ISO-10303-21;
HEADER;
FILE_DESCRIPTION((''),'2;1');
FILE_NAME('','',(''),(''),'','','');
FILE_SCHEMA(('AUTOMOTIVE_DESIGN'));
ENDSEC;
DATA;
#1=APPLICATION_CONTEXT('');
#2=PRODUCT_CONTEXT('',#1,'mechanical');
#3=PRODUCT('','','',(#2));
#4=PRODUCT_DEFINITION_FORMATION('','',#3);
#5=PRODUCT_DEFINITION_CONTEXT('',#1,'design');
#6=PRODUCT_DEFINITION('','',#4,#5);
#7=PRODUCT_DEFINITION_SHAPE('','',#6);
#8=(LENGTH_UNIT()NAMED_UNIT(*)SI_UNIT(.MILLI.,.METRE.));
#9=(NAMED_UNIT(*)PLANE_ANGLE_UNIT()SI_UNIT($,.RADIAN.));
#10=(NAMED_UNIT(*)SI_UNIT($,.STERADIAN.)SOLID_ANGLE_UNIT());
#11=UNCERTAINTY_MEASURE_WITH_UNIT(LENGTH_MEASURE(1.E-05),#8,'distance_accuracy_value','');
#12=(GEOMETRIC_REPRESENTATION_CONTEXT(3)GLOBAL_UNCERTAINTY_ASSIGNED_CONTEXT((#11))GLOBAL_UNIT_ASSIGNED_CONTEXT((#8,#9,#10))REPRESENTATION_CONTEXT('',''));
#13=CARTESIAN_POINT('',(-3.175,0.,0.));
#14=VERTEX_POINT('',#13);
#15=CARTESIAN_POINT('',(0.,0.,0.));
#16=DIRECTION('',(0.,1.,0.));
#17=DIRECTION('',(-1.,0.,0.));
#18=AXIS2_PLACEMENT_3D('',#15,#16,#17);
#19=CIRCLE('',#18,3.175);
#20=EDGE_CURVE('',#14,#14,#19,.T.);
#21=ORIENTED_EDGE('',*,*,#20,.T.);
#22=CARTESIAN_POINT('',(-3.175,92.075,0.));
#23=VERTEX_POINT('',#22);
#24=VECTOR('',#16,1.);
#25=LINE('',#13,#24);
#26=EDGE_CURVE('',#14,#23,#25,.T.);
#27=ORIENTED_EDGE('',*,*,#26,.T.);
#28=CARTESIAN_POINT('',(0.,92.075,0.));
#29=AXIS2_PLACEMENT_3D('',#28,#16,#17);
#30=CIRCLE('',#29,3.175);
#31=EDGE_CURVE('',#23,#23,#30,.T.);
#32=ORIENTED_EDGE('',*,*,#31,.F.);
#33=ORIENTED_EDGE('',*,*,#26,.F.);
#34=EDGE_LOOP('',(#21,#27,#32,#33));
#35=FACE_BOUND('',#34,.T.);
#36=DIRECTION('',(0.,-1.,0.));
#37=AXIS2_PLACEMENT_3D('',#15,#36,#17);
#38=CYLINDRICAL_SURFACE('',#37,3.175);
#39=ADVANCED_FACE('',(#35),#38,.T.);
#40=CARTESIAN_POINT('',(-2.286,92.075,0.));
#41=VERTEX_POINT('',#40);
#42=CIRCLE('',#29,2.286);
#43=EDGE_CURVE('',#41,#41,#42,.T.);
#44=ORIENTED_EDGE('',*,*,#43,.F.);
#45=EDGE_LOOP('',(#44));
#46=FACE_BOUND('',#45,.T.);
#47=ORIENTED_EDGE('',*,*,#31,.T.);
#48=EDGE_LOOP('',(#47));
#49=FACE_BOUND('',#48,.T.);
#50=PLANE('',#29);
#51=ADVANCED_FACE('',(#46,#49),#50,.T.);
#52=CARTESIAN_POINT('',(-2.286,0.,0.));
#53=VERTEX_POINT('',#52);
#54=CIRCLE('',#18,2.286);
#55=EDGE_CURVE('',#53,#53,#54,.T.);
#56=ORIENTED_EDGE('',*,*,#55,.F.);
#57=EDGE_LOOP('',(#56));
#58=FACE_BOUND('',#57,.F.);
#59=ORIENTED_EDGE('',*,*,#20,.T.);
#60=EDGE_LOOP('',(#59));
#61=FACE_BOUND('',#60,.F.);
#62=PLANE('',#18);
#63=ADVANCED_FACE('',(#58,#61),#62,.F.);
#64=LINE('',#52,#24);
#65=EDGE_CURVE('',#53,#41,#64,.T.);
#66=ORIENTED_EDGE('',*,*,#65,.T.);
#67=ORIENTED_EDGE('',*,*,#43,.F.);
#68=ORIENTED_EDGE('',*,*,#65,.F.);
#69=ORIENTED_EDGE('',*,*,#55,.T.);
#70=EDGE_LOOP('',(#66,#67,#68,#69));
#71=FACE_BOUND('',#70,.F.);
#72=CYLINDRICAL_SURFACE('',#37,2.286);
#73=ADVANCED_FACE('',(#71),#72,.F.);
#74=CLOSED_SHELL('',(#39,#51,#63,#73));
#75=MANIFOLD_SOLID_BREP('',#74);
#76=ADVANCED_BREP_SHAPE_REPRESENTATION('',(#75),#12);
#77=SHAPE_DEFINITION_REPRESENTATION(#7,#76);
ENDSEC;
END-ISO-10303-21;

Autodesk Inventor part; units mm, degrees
ref_plane "YZ Plane" through (0, 0, 0) normal (1, 0, 0) x (0, 1, 0)
ref_plane "XZ Plane" through (0, 0, 0) normal (0, 1, 0) x (-1, 0, 0)
ref_plane "XY Plane" through (0, 0, 0) normal (0, 0, 1) x (1, 0, 0)
sketch "Sketch1" plane through (0, 0, 0) normal (0, 1, 0) x (-1, 0, 0)
  circle A0 centre (0, 0) radius 3.175
  circle A1 centre (0, 0) radius 2.286
  dimension "d0" = 6.35
  dimension "d1" = 4.572
extrude "Extrusion1" add sketch "Sketch1" along normal blind 92.075
thread "Thread1" size "1/4-20 UNC" class "2A" standard "ANSI Unified Screw Threads" length 6.35
thread "Thread2" size "1/4-20 UNC" class "2A" standard "ANSI Unified Screw Threads" length 6.35
properties part number "Shaft - Flywheel" material "Steel, Alloy"
